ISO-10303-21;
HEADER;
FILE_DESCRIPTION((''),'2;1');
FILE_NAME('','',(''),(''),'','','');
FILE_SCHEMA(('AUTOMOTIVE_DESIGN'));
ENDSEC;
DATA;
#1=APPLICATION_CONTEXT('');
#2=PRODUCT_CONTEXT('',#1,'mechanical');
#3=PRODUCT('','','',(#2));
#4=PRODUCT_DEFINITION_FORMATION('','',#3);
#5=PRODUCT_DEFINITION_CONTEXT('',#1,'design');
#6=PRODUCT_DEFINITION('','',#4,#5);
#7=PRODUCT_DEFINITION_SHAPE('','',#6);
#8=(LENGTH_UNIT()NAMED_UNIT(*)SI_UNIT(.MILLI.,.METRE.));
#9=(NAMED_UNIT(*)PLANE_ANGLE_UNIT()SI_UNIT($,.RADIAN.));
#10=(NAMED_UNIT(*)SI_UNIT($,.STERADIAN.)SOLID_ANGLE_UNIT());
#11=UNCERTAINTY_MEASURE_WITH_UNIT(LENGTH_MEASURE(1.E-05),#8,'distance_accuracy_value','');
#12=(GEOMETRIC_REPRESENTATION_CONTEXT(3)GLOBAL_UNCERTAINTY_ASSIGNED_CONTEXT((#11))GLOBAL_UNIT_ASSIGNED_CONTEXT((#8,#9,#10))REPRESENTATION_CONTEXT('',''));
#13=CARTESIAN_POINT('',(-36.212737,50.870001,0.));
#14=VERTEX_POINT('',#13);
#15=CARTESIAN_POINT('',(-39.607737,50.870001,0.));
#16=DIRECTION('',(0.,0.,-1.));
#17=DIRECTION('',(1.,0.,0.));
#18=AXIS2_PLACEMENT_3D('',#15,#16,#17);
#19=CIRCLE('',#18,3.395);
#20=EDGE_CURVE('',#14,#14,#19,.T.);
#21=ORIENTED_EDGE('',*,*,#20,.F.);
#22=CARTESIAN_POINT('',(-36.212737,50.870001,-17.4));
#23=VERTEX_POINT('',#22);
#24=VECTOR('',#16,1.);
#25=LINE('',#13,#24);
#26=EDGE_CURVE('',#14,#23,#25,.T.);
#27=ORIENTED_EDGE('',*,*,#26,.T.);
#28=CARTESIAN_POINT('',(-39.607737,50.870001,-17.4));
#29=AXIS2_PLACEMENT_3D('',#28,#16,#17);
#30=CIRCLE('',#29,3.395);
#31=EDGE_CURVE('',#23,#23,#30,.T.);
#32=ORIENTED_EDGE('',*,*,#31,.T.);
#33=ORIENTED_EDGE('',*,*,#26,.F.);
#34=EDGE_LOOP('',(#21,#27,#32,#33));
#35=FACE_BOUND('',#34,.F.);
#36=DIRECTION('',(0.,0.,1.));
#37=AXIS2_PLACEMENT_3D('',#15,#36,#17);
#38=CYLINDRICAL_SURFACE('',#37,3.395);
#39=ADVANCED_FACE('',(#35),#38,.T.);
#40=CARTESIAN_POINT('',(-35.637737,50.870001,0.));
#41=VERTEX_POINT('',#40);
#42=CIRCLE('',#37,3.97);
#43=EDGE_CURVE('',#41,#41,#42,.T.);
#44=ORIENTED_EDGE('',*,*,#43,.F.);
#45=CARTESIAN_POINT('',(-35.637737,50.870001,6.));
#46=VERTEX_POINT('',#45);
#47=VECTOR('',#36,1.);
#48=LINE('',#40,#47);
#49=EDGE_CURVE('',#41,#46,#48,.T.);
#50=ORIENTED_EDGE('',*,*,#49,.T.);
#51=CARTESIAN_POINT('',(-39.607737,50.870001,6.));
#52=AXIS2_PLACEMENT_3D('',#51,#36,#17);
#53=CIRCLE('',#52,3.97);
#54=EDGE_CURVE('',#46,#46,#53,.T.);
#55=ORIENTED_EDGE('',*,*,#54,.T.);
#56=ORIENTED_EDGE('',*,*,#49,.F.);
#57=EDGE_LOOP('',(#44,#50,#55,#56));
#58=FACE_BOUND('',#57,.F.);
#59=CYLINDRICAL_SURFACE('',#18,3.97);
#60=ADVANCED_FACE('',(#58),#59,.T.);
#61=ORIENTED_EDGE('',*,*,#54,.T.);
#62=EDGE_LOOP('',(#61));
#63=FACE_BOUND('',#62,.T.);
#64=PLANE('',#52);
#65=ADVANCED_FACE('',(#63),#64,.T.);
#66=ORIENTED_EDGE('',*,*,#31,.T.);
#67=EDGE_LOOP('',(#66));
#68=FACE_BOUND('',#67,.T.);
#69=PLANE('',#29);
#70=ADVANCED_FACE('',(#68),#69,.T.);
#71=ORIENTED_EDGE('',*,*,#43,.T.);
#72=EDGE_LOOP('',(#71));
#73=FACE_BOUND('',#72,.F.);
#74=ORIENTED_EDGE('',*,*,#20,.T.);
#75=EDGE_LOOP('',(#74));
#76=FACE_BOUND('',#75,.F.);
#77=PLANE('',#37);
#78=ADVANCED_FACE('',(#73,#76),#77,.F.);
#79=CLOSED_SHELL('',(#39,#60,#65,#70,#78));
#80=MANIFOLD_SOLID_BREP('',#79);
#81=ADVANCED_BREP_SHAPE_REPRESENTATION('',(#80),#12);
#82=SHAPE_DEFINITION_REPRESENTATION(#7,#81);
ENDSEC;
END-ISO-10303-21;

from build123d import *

# Parameters (mm, degrees)
F0_R     = 3.97
F0_R_2   = 3.108
F1_DEPTH = 6
F2_R     = 3.395
F3_DEPTH = 17.4


# Not quite as in the source:
# - a feature names something its author has since deleted; it is built from what else it names


with BuildPart() as f1:
    # F0 (on Top) → F1 (new body)
    with BuildSketch(Plane.XY):
        with Locations((-39.6077372134, 50.8700013161)):
            Circle(F0_R)
        with Locations((-39.6077372134, 50.8700013161)):
            Circle(F0_R_2, mode=Mode.SUBTRACT)
        with Locations((-39.6077372134, 50.8700013161)):
            Circle(F0_R_2)
    extrude(amount=F1_DEPTH)

    # F2 (on face) → F3 (join)
    with BuildSketch(Plane(origin=(0, 0, 0), x_dir=(1, 0, 0), z_dir=(0, 0, -1))):
        with Locations((-39.6077372134, -50.8700013161)):
            Circle(F2_R)
    extrude(amount=F3_DEPTH)


solid = f1.part
